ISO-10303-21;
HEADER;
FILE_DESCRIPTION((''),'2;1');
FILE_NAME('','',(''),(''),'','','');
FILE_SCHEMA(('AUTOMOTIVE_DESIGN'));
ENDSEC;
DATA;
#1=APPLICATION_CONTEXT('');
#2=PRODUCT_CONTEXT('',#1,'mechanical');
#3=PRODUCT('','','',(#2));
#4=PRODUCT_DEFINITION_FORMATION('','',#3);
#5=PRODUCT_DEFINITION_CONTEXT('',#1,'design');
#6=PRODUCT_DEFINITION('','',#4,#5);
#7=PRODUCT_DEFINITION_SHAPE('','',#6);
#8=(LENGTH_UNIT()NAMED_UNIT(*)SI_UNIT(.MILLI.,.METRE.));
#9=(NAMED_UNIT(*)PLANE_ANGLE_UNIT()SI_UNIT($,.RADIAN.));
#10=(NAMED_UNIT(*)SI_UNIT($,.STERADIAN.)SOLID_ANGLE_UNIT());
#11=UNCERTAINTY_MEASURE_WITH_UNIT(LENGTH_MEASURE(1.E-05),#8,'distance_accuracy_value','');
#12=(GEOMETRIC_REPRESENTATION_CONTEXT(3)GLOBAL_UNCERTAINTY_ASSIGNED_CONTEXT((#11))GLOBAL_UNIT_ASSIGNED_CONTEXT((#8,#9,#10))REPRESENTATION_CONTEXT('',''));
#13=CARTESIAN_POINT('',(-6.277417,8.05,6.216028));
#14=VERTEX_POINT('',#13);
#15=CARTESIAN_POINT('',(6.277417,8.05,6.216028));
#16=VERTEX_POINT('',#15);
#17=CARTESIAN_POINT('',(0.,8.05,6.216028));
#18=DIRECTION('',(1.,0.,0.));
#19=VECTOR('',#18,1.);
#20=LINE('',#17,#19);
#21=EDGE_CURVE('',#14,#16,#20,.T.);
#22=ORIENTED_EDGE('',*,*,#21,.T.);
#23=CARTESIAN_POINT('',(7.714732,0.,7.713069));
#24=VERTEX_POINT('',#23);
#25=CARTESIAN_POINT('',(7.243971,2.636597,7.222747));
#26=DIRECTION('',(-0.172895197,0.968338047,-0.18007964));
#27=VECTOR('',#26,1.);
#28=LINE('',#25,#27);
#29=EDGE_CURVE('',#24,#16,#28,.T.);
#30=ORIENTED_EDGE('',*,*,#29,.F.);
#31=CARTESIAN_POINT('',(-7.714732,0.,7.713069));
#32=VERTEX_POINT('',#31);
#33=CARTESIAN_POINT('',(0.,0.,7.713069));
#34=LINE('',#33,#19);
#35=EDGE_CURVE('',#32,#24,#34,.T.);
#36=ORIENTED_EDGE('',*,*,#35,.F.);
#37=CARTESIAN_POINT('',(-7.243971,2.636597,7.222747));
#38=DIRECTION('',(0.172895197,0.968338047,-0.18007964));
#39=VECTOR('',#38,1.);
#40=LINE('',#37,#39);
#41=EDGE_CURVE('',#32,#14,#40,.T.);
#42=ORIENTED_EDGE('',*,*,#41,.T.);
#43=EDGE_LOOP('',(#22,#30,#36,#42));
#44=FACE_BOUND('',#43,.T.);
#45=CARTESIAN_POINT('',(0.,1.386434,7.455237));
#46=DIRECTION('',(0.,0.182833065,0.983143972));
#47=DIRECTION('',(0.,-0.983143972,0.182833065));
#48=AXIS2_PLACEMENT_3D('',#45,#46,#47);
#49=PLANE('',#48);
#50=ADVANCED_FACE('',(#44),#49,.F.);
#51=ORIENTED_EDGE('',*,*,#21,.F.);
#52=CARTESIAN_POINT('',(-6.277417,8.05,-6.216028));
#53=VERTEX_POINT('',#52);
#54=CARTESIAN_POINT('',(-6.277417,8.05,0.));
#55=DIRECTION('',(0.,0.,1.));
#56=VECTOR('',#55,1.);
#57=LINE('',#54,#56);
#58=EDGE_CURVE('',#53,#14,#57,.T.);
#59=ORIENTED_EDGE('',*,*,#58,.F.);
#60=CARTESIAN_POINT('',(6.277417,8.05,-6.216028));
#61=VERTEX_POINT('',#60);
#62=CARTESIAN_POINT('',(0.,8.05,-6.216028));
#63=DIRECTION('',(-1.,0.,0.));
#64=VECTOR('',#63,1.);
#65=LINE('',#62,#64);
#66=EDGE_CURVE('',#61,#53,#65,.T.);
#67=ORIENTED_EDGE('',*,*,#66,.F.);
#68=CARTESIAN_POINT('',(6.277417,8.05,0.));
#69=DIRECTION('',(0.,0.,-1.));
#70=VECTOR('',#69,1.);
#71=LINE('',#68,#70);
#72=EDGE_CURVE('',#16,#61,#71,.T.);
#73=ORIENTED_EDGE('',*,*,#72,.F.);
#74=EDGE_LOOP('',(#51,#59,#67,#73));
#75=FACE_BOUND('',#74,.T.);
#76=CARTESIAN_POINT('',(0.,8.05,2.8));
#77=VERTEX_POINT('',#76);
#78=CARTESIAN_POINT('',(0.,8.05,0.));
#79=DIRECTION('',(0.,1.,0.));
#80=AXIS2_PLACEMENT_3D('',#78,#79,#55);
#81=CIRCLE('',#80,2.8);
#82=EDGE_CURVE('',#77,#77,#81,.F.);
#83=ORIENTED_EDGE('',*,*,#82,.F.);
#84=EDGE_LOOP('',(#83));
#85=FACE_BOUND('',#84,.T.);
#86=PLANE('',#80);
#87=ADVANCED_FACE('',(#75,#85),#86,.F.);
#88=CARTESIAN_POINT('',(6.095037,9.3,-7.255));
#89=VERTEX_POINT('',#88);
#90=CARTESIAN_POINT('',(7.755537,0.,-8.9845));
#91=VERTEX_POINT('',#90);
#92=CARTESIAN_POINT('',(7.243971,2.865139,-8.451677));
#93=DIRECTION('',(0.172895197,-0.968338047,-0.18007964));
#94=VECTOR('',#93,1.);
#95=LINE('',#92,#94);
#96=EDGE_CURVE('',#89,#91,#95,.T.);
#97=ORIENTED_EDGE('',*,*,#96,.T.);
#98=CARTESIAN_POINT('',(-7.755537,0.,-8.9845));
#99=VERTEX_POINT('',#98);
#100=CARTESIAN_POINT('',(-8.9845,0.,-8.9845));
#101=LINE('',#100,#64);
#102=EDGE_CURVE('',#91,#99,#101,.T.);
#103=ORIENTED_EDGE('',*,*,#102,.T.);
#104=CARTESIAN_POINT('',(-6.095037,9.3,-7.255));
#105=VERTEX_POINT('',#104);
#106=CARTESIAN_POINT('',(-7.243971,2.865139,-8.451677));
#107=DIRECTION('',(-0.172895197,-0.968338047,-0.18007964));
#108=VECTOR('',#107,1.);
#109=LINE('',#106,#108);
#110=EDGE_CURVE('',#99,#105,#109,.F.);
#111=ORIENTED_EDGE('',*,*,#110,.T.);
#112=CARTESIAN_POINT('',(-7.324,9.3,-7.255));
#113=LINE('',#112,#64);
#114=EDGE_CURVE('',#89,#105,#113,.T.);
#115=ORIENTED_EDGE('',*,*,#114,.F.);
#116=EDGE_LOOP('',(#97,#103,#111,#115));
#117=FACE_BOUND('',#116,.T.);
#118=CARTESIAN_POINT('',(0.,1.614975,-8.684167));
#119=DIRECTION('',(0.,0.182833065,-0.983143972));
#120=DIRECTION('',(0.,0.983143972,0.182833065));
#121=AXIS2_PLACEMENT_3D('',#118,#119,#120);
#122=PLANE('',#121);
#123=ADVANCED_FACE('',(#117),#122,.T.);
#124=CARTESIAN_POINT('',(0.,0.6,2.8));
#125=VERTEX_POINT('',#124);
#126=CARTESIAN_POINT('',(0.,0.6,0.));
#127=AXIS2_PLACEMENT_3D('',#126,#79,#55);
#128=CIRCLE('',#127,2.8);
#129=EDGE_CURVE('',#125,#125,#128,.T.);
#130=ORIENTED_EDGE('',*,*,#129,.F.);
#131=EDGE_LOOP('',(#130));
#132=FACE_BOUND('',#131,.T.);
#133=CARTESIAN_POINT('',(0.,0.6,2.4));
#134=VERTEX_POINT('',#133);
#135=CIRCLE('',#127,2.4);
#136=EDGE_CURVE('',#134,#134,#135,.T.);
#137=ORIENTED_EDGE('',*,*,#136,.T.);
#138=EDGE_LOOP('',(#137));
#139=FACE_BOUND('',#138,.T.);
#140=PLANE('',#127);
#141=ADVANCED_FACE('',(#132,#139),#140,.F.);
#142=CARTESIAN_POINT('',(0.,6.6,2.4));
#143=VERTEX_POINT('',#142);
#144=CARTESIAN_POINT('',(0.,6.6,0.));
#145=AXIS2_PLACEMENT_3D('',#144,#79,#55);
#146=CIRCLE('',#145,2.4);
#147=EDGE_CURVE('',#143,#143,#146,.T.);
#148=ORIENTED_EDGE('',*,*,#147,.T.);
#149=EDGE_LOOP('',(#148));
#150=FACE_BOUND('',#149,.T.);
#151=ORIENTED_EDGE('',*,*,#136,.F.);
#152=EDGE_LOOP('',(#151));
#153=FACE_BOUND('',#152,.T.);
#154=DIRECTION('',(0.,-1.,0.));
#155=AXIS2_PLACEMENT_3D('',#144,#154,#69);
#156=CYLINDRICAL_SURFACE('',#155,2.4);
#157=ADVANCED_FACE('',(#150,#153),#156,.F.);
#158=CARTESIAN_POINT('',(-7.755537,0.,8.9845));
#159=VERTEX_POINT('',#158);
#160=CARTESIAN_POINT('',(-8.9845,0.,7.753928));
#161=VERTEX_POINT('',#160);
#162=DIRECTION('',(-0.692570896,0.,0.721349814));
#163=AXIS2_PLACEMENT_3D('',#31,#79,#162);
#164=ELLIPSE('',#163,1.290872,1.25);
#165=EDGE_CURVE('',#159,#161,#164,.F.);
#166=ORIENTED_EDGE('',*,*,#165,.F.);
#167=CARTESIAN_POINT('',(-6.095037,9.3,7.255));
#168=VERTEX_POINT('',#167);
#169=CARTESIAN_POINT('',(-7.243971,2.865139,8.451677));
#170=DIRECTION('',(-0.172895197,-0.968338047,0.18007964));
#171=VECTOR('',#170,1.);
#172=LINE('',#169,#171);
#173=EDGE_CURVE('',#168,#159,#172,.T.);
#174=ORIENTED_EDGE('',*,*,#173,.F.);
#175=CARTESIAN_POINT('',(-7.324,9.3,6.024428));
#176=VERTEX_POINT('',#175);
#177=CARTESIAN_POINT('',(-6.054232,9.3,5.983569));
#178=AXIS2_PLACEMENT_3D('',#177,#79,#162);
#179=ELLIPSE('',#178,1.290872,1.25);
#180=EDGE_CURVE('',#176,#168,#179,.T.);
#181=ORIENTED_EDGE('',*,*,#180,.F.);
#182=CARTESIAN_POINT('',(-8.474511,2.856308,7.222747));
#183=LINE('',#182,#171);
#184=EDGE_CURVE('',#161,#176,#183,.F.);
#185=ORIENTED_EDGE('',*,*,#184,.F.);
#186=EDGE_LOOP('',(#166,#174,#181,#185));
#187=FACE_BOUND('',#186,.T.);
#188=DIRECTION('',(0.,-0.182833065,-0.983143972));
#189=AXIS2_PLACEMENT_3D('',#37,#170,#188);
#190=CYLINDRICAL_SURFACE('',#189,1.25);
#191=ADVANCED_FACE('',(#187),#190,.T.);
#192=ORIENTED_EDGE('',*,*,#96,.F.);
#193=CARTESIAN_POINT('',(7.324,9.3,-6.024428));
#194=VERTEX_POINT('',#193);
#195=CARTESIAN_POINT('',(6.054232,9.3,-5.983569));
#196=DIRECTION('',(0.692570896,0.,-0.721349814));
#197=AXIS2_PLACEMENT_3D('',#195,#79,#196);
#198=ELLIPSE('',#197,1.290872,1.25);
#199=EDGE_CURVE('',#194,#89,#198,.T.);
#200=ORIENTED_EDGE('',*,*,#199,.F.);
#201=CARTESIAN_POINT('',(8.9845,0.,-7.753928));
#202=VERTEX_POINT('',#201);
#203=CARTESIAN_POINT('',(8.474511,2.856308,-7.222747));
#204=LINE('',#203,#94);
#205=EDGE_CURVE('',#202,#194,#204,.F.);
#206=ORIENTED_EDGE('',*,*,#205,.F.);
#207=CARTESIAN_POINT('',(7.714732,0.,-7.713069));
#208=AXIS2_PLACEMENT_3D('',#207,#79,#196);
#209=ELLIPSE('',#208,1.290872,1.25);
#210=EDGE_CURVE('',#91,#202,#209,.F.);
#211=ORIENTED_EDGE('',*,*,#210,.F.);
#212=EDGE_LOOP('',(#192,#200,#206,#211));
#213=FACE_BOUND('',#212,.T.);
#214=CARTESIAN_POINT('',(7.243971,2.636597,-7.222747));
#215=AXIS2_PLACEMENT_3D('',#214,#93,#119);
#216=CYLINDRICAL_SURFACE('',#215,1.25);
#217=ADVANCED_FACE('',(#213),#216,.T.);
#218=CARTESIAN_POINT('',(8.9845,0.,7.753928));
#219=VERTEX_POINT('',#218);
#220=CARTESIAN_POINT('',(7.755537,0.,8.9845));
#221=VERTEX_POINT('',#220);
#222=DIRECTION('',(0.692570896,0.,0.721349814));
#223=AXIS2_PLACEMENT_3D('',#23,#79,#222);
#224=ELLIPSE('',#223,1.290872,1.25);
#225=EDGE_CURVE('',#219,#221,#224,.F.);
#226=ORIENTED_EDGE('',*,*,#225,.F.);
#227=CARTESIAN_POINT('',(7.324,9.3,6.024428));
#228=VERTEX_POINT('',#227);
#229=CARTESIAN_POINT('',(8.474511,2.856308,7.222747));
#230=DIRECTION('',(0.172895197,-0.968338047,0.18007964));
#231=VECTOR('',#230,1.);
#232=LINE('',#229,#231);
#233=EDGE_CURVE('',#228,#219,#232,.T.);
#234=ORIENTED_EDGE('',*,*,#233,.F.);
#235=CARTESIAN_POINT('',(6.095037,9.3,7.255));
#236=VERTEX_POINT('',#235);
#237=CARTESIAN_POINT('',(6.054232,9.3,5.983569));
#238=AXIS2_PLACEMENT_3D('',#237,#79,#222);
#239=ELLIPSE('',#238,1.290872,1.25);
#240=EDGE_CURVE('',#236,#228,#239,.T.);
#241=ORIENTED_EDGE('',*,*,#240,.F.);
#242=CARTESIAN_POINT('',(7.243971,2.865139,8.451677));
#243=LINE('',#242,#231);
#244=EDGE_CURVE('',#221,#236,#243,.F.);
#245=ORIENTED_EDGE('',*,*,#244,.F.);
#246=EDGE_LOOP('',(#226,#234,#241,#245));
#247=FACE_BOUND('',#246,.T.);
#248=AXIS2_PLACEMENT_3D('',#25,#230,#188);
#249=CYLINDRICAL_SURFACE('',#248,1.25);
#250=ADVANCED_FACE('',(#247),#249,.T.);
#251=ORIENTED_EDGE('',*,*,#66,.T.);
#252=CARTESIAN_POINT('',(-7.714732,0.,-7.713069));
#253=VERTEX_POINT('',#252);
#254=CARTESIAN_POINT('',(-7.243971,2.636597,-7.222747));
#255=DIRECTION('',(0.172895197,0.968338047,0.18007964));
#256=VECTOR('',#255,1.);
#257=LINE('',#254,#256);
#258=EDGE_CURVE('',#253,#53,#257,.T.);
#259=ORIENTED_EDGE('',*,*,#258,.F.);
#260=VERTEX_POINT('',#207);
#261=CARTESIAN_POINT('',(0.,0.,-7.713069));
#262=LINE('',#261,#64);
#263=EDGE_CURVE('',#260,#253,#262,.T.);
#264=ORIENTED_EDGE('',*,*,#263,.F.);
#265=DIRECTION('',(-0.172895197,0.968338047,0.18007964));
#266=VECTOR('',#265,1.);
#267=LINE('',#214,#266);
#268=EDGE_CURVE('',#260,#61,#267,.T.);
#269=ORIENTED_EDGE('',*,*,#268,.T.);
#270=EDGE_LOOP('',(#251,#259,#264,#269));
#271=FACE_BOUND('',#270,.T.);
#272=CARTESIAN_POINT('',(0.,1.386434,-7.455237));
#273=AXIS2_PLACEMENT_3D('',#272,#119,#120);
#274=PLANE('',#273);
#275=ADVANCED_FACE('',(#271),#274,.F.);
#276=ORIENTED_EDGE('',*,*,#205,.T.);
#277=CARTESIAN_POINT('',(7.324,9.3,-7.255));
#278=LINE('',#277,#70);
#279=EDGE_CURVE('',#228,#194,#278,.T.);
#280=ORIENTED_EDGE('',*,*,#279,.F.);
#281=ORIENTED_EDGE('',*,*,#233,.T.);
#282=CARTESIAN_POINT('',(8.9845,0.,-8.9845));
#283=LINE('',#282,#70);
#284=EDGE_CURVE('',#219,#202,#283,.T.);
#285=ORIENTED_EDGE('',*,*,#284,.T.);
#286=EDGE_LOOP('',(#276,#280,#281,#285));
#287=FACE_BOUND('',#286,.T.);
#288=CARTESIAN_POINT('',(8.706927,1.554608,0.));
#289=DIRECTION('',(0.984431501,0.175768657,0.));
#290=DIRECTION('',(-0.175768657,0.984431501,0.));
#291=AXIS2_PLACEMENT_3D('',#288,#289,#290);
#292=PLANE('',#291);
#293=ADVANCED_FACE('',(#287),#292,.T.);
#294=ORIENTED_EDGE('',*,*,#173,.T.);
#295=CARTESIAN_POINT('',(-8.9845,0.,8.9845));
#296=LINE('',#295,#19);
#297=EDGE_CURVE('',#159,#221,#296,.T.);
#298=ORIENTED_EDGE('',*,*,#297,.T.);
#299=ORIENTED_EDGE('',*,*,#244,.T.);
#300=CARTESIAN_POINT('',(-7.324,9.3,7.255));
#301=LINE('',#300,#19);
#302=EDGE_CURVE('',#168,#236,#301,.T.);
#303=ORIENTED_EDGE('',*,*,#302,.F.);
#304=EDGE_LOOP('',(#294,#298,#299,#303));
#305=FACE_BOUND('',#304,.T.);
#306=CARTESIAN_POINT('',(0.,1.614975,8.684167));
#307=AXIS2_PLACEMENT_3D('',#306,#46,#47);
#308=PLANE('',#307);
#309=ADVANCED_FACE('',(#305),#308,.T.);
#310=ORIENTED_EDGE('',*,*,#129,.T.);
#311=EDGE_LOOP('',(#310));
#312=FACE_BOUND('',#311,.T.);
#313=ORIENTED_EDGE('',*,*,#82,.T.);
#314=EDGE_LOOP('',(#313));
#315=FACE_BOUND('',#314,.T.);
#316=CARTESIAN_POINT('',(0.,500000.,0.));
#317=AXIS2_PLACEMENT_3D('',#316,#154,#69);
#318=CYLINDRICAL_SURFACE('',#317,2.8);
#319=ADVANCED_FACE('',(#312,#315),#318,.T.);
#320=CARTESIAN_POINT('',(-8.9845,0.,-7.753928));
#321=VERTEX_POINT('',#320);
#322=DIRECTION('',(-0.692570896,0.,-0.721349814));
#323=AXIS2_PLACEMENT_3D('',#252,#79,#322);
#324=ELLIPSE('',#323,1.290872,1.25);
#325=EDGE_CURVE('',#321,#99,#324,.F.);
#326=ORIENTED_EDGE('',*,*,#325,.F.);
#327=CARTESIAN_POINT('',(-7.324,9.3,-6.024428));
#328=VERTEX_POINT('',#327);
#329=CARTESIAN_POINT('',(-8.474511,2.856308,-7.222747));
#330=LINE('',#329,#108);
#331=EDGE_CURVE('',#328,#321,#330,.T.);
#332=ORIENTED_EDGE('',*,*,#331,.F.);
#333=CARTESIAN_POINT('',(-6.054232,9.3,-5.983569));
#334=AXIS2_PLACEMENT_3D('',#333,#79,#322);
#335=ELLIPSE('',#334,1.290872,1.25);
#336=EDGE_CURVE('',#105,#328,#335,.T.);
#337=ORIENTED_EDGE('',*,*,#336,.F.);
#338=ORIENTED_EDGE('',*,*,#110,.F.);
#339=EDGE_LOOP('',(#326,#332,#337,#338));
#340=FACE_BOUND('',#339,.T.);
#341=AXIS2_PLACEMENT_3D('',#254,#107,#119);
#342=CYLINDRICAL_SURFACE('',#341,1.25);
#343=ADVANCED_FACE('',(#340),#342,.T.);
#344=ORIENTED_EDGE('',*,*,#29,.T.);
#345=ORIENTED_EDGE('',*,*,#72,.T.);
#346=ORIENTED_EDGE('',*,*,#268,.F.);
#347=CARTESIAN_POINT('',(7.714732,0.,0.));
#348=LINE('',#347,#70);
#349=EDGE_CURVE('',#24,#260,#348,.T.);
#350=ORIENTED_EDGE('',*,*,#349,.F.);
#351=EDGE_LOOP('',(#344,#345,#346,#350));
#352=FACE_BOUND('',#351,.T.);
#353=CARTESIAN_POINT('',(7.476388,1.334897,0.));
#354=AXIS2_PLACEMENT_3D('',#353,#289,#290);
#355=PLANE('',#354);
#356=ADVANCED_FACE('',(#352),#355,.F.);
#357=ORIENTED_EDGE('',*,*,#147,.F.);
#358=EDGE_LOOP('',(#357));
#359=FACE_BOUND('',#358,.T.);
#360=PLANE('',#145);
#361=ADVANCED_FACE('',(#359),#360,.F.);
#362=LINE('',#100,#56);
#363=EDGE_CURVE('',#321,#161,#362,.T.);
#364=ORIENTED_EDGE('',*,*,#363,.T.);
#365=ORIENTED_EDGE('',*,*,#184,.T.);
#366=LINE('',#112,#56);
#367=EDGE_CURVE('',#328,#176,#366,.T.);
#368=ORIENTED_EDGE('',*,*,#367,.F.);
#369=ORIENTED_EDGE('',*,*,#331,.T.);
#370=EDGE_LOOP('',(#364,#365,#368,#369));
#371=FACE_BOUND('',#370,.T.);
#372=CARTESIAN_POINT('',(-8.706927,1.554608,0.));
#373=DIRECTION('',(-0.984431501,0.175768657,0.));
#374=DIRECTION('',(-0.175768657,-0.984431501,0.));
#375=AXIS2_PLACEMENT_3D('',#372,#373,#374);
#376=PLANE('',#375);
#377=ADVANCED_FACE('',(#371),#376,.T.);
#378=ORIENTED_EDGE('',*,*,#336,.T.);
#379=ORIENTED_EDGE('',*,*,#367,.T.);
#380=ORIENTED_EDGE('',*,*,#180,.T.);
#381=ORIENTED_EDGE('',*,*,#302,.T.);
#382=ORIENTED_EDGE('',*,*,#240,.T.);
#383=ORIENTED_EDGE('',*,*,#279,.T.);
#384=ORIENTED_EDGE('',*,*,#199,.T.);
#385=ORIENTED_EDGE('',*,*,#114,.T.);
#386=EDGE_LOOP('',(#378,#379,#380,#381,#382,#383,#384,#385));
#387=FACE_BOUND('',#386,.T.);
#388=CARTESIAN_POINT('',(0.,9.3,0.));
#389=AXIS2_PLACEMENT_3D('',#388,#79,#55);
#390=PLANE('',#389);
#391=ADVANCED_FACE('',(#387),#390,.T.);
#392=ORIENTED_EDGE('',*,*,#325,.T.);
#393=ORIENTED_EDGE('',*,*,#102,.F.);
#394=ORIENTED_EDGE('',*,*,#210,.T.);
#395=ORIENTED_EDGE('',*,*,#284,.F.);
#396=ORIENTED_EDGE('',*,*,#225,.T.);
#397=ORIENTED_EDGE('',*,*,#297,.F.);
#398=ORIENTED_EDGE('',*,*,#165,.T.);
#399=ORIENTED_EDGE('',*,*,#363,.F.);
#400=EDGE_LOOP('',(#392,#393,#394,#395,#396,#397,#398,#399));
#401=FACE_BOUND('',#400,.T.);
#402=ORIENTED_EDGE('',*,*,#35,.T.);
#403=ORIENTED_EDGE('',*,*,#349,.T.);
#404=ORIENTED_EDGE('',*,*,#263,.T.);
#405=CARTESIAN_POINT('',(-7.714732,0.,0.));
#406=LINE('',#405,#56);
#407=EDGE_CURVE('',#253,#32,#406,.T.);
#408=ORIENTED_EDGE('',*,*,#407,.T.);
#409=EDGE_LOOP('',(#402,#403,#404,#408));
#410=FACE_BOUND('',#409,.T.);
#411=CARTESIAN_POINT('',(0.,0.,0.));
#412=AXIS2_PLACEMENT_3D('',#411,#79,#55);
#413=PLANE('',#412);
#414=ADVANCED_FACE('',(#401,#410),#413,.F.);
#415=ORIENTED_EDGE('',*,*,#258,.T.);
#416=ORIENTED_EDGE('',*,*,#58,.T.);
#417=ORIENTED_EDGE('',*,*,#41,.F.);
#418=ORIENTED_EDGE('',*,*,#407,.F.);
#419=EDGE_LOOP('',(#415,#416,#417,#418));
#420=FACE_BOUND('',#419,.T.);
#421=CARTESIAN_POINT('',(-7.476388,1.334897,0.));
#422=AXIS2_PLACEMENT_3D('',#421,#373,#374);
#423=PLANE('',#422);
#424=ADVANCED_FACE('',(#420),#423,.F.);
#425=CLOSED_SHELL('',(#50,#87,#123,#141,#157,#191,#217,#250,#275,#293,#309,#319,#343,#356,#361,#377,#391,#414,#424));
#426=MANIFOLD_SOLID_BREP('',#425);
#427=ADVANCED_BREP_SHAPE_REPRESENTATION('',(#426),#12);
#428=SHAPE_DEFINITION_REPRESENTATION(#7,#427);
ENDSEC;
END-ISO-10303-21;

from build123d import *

# Parameters (mm, degrees)
FILLET1_R           = 1.25
BOSS_EXTRUDE1_REACH = 17.399
SKETCH8_R           = 2.8
SKETCH12_R          = 2.4
CUT_EXTRUDE8_DEPTH  = 6


with BuildPart() as part:
    # Sketch6 → Loft2 section 0
    with BuildSketch(Plane(origin=(0, 9.3, 0), x_dir=(1, 0, 0), z_dir=(0, 1, 0))):
        with BuildLine():
            Line((-7.324, 7.255), (7.324, 7.255))
            Line((7.324, 7.255), (7.324, -7.255))
            Line((7.324, -7.255), (-7.324, -7.255))
            Line((-7.324, -7.255), (-7.324, 7.255))
        make_face()
    # Sketch5 → Loft2 section 1
    with BuildSketch(Plane(origin=(0, 0, 0), x_dir=(1, 0, 0), z_dir=(0, 1, 0))):
        with BuildLine():
            Line((-8.9845, 8.9845), (8.9845, 8.9845))
            Line((8.9845, 8.9845), (8.9845, -8.9845))
            Line((8.9845, -8.9845), (-8.9845, -8.9845))
            Line((-8.9845, -8.9845), (-8.9845, 8.9845))
        make_face()
    loft()

    # Fillet1
    fillet1_edges = [part.edges().sort_by_distance(p)[0] for p in [
        (8.15425, 4.65, -8.11975),
        (8.15425, 4.65, 8.11975),
        (-8.15425, 4.65, -8.11975),
        (-8.15425, 4.65, 8.11975),
    ]]
    fillet(fillet1_edges, radius=FILLET1_R)

    # Shell1: read off the stored shape, not the designer's step
    # Shell1: loft between two sections, ruled curve by curve
    shell1_from = [
        Edge.make_line((-7.714731612, 0, -7.713068719), (7.714731612, 0, -7.713068719)),
        Edge.make_line((-7.714731612, 0, 7.713068719), (-7.714731612, 0, -7.713068719)),
        Edge.make_line((7.714731612, 0, 7.713068719), (7.714731612, 0, -7.713068719)),
        Edge.make_line((-7.714731612, 0, 7.713068719), (7.714731612, 0, 7.713068719)),
    ]
    shell1_to = [
        Edge.make_line((-6.277417095, 8.05, -6.216028397), (6.277417095, 8.05, -6.216028397)),
        Edge.make_line((-6.277417095, 8.05, 6.216028397), (-6.277417095, 8.05, -6.216028397)),
        Edge.make_line((6.277417095, 8.05, 6.216028397), (6.277417095, 8.05, -6.216028397)),
        Edge.make_line((-6.277417095, 8.05, 6.216028397), (6.277417095, 8.05, 6.216028397)),
    ]
    shell1 = Solid(Shell([*[Face.make_surface_from_curves(shell1_from[k], shell1_to[k]) for k in range(4)], Face(Wire(shell1_from)), Face(Wire(shell1_to))]))
    add(shell1, mode=Mode.SUBTRACT)

    # Sketch8 → Boss-Extrude1 (add, up to next)
    with BuildSketch(Plane(origin=(0, 0.6, 0), x_dir=(1, 0, 0), z_dir=(0, 1, 0)), mode=Mode.PRIVATE) as boss_extrude1_sk1:
        with Locations(Location((0, 0, 0), (0, 0, 270))):
            Circle(SKETCH8_R)
    boss_extrude1_tool1 = extrude(boss_extrude1_sk1.sketch, amount=BOSS_EXTRUDE1_REACH, mode=Mode.PRIVATE) - part.part
    add(boss_extrude1_tool1.solids().sort_by_distance((0, 0.6, 0))[0])

    # Sketch12 → Cut-Extrude8 (cut)
    with BuildSketch(Plane(origin=(0, 0.6, 0), x_dir=(1, 0, 0), z_dir=(0, 1, 0))):
        with Locations(Location((0, 0, 0), (0, 0, 270))):
            Circle(SKETCH12_R)
    extrude(amount=CUT_EXTRUDE8_DEPTH, mode=Mode.SUBTRACT)


solid = part.part
